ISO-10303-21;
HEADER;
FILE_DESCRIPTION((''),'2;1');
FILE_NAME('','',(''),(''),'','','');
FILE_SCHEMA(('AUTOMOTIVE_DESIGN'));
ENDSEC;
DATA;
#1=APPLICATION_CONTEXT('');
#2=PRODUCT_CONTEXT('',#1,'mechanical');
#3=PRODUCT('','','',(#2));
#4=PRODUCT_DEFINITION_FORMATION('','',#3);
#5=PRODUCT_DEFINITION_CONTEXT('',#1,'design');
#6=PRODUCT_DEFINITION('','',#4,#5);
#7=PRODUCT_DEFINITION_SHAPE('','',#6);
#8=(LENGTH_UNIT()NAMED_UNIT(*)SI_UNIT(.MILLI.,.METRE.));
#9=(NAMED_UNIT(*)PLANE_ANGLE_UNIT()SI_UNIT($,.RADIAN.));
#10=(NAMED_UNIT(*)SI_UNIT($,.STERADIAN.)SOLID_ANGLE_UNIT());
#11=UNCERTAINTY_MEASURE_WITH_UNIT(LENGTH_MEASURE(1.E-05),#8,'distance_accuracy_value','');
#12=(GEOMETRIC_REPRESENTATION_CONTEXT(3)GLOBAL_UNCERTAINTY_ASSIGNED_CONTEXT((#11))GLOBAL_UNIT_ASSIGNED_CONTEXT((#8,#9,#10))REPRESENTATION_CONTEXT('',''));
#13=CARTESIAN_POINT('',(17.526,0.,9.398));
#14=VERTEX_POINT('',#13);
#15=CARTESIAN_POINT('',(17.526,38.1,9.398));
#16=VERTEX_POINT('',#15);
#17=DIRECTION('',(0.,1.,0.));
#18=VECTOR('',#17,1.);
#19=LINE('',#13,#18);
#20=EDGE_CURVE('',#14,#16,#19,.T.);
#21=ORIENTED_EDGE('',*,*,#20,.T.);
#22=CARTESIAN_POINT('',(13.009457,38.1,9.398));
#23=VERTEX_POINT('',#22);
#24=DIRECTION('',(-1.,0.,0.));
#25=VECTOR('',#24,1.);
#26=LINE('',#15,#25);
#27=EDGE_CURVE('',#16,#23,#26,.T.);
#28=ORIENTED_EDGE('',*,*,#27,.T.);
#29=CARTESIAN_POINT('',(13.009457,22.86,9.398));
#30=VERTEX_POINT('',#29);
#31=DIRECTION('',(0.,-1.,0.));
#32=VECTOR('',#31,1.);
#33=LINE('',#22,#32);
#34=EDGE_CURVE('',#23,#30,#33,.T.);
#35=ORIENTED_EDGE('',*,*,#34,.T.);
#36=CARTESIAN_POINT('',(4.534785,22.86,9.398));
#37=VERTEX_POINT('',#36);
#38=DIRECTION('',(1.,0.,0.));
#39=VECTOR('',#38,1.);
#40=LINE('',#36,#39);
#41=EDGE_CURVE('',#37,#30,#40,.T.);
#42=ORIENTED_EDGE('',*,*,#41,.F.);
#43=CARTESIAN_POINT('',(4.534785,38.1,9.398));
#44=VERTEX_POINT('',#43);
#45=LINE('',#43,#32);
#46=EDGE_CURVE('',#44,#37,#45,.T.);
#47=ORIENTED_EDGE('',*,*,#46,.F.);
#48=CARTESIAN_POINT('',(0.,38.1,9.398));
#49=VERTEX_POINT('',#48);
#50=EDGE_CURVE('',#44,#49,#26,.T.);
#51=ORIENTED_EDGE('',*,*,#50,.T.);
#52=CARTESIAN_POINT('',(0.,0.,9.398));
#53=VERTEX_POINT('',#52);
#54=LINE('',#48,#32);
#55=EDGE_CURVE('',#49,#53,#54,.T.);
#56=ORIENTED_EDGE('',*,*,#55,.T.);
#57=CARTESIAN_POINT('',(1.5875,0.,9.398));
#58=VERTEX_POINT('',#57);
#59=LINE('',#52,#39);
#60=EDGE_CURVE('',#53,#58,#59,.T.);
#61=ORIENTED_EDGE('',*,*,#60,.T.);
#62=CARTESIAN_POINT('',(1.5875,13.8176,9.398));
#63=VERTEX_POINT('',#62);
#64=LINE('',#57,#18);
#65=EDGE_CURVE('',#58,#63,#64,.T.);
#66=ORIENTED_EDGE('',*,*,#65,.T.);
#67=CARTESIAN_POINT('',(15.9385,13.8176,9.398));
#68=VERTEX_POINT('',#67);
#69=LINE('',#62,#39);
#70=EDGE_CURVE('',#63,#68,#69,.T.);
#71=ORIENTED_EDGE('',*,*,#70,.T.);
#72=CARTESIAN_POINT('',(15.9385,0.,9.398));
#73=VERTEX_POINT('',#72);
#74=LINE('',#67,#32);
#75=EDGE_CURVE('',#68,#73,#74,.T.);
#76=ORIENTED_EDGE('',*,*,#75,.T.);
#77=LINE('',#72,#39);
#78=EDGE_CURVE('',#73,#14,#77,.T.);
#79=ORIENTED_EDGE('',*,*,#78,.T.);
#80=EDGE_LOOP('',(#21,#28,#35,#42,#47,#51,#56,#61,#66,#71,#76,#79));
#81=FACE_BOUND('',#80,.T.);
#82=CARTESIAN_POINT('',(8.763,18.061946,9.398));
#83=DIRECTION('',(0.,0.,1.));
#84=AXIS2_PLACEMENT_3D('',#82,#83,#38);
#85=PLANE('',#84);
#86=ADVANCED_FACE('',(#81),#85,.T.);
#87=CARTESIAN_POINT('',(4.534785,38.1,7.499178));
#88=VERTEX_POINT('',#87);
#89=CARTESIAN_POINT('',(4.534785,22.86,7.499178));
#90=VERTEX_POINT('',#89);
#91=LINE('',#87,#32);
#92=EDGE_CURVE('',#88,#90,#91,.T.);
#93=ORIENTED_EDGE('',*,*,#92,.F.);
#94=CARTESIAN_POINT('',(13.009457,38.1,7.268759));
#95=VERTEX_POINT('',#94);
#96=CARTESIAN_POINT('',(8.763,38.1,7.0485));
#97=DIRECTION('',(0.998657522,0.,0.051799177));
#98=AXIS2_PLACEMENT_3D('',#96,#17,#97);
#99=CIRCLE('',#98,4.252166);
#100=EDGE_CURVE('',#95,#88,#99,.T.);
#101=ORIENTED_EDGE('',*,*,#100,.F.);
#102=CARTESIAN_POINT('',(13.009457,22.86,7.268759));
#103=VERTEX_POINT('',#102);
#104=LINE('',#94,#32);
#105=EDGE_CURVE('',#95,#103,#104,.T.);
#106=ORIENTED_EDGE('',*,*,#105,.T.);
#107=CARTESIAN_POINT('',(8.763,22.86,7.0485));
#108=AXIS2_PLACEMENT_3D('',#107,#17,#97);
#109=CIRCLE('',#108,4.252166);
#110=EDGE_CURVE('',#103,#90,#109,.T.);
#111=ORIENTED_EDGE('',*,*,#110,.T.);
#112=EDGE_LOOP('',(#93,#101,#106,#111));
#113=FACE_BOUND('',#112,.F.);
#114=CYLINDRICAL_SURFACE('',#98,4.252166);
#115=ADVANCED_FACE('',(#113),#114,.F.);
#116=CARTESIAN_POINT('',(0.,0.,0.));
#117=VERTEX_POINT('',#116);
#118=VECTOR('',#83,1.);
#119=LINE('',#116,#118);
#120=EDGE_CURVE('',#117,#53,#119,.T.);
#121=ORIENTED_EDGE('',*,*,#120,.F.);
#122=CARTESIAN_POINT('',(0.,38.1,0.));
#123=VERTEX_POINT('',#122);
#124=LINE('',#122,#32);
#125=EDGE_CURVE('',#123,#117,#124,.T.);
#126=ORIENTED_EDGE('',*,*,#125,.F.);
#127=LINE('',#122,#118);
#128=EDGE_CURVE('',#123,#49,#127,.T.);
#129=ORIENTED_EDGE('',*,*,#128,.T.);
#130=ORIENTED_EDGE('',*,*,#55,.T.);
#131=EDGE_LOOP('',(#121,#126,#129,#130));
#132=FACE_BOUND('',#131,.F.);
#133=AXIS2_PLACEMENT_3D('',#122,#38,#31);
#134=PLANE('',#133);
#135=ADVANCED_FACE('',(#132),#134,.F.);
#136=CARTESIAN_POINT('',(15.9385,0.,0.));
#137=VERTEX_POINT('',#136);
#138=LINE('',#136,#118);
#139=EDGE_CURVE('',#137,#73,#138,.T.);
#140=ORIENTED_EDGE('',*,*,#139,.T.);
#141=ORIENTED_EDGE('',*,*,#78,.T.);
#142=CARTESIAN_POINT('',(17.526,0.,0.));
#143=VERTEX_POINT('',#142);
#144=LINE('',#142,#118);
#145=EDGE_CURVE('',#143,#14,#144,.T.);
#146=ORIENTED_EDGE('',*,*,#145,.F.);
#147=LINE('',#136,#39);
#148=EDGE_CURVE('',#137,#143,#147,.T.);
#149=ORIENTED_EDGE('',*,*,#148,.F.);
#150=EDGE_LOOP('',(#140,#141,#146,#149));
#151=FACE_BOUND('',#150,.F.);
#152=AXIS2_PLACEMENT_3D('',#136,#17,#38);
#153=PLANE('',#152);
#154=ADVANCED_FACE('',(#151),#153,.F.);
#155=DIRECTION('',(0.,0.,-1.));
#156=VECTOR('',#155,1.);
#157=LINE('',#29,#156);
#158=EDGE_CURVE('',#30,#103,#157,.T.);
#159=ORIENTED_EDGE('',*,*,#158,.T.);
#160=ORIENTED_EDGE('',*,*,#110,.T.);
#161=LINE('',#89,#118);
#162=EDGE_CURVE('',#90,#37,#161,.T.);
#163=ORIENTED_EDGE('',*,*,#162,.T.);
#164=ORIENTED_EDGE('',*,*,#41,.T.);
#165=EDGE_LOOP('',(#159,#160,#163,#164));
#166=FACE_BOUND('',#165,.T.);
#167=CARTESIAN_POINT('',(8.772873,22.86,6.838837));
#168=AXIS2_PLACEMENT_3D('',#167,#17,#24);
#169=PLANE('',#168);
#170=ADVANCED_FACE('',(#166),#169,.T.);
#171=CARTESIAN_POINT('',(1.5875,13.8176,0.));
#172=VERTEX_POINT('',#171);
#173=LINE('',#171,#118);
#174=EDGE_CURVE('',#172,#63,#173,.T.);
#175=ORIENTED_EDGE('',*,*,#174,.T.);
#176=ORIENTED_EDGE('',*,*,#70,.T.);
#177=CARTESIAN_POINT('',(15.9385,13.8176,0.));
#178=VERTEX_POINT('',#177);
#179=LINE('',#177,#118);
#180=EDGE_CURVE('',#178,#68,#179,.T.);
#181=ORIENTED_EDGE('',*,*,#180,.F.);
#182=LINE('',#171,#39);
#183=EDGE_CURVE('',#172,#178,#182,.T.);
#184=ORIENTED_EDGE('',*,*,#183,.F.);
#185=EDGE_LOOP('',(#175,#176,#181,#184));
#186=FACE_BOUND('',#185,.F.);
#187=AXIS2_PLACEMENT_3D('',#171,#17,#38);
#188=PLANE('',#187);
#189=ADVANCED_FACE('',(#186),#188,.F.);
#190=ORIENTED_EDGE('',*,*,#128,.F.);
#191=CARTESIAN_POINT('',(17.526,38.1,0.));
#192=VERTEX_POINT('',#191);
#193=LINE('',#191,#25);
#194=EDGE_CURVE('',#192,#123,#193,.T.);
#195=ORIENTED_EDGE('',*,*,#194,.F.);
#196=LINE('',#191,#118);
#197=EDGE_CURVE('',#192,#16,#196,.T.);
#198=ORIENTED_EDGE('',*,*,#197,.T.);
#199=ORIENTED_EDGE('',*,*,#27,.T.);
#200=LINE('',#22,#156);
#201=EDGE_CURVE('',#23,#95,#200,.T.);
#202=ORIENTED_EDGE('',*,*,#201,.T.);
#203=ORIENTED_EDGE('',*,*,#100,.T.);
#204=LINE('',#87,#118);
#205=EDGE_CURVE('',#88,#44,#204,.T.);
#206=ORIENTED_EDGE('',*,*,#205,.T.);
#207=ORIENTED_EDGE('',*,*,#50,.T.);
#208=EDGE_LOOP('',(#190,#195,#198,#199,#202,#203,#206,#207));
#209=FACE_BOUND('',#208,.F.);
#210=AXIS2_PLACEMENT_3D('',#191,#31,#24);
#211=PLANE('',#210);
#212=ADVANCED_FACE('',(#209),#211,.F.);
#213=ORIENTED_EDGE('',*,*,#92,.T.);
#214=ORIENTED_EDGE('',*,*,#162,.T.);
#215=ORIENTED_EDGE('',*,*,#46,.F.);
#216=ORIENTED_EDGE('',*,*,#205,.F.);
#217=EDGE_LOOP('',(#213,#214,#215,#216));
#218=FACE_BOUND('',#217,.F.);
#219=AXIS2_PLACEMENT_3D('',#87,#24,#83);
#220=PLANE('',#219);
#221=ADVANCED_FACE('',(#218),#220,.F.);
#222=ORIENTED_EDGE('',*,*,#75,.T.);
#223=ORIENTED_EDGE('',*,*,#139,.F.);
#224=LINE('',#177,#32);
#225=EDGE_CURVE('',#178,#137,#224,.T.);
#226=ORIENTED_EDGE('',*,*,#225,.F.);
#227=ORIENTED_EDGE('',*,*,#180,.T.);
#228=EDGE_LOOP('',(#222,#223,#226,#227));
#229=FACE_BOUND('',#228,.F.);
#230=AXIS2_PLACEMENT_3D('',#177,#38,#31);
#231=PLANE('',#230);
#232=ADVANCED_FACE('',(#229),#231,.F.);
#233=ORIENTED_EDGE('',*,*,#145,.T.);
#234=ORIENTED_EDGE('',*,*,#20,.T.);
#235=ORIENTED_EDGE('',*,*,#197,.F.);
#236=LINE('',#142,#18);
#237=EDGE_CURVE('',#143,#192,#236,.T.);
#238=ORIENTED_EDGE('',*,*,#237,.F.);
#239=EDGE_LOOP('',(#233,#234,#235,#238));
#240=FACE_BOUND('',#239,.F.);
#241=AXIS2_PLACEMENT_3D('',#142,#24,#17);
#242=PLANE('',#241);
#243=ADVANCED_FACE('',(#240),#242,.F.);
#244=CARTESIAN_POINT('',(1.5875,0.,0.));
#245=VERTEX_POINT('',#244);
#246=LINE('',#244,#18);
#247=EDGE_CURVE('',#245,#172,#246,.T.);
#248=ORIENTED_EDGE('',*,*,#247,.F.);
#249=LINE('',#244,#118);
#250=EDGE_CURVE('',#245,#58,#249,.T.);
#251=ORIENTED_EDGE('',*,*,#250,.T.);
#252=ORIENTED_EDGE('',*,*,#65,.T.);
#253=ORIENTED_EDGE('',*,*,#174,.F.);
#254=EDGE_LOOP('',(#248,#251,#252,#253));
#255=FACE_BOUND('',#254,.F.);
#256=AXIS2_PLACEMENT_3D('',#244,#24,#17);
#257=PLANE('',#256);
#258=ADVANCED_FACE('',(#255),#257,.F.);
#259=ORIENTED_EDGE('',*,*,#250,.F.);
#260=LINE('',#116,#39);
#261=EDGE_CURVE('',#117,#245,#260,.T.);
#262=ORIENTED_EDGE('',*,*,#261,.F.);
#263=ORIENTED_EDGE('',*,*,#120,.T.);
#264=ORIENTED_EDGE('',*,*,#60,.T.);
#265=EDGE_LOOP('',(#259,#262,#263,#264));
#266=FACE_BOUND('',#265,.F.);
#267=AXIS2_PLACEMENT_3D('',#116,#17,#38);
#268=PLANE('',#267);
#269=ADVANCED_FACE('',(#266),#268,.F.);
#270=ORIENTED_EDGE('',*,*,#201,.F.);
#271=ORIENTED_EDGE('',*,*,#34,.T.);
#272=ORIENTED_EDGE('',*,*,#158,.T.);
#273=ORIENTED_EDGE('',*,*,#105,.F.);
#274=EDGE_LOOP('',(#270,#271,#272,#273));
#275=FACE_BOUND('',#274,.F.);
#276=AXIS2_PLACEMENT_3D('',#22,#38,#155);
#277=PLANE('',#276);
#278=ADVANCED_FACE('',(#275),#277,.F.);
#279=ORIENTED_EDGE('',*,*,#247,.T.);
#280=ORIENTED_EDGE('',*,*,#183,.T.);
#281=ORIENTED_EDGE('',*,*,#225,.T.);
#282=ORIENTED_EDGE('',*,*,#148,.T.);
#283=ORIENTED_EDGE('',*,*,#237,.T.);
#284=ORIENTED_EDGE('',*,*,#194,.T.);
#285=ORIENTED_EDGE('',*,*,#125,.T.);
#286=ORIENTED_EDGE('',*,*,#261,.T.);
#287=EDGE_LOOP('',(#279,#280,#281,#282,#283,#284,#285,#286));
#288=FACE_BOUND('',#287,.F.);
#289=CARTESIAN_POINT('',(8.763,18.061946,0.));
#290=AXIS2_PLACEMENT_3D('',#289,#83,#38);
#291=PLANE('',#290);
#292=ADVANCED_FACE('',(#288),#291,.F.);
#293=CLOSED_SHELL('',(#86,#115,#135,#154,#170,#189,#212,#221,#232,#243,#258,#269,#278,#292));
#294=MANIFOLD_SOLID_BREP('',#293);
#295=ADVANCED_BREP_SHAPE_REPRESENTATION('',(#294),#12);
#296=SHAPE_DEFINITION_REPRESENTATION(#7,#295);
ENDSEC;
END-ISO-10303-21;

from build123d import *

# Parameters (mm, degrees)
F1_DEPTH = 9.398
F3_DEPTH = 15.24


with BuildPart() as f1:
    # F0 (on Top) → F1 (new body)
    with BuildSketch(Plane.XY):
        Polygon((0, 38.1), (0, 0), (1.5875, 0), (1.5875, 13.8176), (15.9385, 13.8176), (15.9385, 0), (17.526, 0), (17.526, 38.1), align=None)
    extrude(amount=F1_DEPTH)

    # F2 (on face) → F3 (cut)
    with BuildSketch(Plane(origin=(0, 38.1, 0), x_dir=(-1, 0, 0), z_dir=(0, 1, 0))):
        with BuildLine():
            Line((-13.0094570703, 9.398), (-13.0094570703, 7.2687586724))
            ThreePointArc((-13.0094570703, 7.2687586724), (-8.647429717, 2.7979053307), (-4.5347851701, 7.4991782504))
            Line((-4.5347851701, 7.4991782504), (-4.5347851701, 9.398))
            Line((-4.5347851701, 9.398), (-13.0094570703, 9.398))
        make_face()
    extrude(amount=-F3_DEPTH, mode=Mode.SUBTRACT)


solid = f1.part
